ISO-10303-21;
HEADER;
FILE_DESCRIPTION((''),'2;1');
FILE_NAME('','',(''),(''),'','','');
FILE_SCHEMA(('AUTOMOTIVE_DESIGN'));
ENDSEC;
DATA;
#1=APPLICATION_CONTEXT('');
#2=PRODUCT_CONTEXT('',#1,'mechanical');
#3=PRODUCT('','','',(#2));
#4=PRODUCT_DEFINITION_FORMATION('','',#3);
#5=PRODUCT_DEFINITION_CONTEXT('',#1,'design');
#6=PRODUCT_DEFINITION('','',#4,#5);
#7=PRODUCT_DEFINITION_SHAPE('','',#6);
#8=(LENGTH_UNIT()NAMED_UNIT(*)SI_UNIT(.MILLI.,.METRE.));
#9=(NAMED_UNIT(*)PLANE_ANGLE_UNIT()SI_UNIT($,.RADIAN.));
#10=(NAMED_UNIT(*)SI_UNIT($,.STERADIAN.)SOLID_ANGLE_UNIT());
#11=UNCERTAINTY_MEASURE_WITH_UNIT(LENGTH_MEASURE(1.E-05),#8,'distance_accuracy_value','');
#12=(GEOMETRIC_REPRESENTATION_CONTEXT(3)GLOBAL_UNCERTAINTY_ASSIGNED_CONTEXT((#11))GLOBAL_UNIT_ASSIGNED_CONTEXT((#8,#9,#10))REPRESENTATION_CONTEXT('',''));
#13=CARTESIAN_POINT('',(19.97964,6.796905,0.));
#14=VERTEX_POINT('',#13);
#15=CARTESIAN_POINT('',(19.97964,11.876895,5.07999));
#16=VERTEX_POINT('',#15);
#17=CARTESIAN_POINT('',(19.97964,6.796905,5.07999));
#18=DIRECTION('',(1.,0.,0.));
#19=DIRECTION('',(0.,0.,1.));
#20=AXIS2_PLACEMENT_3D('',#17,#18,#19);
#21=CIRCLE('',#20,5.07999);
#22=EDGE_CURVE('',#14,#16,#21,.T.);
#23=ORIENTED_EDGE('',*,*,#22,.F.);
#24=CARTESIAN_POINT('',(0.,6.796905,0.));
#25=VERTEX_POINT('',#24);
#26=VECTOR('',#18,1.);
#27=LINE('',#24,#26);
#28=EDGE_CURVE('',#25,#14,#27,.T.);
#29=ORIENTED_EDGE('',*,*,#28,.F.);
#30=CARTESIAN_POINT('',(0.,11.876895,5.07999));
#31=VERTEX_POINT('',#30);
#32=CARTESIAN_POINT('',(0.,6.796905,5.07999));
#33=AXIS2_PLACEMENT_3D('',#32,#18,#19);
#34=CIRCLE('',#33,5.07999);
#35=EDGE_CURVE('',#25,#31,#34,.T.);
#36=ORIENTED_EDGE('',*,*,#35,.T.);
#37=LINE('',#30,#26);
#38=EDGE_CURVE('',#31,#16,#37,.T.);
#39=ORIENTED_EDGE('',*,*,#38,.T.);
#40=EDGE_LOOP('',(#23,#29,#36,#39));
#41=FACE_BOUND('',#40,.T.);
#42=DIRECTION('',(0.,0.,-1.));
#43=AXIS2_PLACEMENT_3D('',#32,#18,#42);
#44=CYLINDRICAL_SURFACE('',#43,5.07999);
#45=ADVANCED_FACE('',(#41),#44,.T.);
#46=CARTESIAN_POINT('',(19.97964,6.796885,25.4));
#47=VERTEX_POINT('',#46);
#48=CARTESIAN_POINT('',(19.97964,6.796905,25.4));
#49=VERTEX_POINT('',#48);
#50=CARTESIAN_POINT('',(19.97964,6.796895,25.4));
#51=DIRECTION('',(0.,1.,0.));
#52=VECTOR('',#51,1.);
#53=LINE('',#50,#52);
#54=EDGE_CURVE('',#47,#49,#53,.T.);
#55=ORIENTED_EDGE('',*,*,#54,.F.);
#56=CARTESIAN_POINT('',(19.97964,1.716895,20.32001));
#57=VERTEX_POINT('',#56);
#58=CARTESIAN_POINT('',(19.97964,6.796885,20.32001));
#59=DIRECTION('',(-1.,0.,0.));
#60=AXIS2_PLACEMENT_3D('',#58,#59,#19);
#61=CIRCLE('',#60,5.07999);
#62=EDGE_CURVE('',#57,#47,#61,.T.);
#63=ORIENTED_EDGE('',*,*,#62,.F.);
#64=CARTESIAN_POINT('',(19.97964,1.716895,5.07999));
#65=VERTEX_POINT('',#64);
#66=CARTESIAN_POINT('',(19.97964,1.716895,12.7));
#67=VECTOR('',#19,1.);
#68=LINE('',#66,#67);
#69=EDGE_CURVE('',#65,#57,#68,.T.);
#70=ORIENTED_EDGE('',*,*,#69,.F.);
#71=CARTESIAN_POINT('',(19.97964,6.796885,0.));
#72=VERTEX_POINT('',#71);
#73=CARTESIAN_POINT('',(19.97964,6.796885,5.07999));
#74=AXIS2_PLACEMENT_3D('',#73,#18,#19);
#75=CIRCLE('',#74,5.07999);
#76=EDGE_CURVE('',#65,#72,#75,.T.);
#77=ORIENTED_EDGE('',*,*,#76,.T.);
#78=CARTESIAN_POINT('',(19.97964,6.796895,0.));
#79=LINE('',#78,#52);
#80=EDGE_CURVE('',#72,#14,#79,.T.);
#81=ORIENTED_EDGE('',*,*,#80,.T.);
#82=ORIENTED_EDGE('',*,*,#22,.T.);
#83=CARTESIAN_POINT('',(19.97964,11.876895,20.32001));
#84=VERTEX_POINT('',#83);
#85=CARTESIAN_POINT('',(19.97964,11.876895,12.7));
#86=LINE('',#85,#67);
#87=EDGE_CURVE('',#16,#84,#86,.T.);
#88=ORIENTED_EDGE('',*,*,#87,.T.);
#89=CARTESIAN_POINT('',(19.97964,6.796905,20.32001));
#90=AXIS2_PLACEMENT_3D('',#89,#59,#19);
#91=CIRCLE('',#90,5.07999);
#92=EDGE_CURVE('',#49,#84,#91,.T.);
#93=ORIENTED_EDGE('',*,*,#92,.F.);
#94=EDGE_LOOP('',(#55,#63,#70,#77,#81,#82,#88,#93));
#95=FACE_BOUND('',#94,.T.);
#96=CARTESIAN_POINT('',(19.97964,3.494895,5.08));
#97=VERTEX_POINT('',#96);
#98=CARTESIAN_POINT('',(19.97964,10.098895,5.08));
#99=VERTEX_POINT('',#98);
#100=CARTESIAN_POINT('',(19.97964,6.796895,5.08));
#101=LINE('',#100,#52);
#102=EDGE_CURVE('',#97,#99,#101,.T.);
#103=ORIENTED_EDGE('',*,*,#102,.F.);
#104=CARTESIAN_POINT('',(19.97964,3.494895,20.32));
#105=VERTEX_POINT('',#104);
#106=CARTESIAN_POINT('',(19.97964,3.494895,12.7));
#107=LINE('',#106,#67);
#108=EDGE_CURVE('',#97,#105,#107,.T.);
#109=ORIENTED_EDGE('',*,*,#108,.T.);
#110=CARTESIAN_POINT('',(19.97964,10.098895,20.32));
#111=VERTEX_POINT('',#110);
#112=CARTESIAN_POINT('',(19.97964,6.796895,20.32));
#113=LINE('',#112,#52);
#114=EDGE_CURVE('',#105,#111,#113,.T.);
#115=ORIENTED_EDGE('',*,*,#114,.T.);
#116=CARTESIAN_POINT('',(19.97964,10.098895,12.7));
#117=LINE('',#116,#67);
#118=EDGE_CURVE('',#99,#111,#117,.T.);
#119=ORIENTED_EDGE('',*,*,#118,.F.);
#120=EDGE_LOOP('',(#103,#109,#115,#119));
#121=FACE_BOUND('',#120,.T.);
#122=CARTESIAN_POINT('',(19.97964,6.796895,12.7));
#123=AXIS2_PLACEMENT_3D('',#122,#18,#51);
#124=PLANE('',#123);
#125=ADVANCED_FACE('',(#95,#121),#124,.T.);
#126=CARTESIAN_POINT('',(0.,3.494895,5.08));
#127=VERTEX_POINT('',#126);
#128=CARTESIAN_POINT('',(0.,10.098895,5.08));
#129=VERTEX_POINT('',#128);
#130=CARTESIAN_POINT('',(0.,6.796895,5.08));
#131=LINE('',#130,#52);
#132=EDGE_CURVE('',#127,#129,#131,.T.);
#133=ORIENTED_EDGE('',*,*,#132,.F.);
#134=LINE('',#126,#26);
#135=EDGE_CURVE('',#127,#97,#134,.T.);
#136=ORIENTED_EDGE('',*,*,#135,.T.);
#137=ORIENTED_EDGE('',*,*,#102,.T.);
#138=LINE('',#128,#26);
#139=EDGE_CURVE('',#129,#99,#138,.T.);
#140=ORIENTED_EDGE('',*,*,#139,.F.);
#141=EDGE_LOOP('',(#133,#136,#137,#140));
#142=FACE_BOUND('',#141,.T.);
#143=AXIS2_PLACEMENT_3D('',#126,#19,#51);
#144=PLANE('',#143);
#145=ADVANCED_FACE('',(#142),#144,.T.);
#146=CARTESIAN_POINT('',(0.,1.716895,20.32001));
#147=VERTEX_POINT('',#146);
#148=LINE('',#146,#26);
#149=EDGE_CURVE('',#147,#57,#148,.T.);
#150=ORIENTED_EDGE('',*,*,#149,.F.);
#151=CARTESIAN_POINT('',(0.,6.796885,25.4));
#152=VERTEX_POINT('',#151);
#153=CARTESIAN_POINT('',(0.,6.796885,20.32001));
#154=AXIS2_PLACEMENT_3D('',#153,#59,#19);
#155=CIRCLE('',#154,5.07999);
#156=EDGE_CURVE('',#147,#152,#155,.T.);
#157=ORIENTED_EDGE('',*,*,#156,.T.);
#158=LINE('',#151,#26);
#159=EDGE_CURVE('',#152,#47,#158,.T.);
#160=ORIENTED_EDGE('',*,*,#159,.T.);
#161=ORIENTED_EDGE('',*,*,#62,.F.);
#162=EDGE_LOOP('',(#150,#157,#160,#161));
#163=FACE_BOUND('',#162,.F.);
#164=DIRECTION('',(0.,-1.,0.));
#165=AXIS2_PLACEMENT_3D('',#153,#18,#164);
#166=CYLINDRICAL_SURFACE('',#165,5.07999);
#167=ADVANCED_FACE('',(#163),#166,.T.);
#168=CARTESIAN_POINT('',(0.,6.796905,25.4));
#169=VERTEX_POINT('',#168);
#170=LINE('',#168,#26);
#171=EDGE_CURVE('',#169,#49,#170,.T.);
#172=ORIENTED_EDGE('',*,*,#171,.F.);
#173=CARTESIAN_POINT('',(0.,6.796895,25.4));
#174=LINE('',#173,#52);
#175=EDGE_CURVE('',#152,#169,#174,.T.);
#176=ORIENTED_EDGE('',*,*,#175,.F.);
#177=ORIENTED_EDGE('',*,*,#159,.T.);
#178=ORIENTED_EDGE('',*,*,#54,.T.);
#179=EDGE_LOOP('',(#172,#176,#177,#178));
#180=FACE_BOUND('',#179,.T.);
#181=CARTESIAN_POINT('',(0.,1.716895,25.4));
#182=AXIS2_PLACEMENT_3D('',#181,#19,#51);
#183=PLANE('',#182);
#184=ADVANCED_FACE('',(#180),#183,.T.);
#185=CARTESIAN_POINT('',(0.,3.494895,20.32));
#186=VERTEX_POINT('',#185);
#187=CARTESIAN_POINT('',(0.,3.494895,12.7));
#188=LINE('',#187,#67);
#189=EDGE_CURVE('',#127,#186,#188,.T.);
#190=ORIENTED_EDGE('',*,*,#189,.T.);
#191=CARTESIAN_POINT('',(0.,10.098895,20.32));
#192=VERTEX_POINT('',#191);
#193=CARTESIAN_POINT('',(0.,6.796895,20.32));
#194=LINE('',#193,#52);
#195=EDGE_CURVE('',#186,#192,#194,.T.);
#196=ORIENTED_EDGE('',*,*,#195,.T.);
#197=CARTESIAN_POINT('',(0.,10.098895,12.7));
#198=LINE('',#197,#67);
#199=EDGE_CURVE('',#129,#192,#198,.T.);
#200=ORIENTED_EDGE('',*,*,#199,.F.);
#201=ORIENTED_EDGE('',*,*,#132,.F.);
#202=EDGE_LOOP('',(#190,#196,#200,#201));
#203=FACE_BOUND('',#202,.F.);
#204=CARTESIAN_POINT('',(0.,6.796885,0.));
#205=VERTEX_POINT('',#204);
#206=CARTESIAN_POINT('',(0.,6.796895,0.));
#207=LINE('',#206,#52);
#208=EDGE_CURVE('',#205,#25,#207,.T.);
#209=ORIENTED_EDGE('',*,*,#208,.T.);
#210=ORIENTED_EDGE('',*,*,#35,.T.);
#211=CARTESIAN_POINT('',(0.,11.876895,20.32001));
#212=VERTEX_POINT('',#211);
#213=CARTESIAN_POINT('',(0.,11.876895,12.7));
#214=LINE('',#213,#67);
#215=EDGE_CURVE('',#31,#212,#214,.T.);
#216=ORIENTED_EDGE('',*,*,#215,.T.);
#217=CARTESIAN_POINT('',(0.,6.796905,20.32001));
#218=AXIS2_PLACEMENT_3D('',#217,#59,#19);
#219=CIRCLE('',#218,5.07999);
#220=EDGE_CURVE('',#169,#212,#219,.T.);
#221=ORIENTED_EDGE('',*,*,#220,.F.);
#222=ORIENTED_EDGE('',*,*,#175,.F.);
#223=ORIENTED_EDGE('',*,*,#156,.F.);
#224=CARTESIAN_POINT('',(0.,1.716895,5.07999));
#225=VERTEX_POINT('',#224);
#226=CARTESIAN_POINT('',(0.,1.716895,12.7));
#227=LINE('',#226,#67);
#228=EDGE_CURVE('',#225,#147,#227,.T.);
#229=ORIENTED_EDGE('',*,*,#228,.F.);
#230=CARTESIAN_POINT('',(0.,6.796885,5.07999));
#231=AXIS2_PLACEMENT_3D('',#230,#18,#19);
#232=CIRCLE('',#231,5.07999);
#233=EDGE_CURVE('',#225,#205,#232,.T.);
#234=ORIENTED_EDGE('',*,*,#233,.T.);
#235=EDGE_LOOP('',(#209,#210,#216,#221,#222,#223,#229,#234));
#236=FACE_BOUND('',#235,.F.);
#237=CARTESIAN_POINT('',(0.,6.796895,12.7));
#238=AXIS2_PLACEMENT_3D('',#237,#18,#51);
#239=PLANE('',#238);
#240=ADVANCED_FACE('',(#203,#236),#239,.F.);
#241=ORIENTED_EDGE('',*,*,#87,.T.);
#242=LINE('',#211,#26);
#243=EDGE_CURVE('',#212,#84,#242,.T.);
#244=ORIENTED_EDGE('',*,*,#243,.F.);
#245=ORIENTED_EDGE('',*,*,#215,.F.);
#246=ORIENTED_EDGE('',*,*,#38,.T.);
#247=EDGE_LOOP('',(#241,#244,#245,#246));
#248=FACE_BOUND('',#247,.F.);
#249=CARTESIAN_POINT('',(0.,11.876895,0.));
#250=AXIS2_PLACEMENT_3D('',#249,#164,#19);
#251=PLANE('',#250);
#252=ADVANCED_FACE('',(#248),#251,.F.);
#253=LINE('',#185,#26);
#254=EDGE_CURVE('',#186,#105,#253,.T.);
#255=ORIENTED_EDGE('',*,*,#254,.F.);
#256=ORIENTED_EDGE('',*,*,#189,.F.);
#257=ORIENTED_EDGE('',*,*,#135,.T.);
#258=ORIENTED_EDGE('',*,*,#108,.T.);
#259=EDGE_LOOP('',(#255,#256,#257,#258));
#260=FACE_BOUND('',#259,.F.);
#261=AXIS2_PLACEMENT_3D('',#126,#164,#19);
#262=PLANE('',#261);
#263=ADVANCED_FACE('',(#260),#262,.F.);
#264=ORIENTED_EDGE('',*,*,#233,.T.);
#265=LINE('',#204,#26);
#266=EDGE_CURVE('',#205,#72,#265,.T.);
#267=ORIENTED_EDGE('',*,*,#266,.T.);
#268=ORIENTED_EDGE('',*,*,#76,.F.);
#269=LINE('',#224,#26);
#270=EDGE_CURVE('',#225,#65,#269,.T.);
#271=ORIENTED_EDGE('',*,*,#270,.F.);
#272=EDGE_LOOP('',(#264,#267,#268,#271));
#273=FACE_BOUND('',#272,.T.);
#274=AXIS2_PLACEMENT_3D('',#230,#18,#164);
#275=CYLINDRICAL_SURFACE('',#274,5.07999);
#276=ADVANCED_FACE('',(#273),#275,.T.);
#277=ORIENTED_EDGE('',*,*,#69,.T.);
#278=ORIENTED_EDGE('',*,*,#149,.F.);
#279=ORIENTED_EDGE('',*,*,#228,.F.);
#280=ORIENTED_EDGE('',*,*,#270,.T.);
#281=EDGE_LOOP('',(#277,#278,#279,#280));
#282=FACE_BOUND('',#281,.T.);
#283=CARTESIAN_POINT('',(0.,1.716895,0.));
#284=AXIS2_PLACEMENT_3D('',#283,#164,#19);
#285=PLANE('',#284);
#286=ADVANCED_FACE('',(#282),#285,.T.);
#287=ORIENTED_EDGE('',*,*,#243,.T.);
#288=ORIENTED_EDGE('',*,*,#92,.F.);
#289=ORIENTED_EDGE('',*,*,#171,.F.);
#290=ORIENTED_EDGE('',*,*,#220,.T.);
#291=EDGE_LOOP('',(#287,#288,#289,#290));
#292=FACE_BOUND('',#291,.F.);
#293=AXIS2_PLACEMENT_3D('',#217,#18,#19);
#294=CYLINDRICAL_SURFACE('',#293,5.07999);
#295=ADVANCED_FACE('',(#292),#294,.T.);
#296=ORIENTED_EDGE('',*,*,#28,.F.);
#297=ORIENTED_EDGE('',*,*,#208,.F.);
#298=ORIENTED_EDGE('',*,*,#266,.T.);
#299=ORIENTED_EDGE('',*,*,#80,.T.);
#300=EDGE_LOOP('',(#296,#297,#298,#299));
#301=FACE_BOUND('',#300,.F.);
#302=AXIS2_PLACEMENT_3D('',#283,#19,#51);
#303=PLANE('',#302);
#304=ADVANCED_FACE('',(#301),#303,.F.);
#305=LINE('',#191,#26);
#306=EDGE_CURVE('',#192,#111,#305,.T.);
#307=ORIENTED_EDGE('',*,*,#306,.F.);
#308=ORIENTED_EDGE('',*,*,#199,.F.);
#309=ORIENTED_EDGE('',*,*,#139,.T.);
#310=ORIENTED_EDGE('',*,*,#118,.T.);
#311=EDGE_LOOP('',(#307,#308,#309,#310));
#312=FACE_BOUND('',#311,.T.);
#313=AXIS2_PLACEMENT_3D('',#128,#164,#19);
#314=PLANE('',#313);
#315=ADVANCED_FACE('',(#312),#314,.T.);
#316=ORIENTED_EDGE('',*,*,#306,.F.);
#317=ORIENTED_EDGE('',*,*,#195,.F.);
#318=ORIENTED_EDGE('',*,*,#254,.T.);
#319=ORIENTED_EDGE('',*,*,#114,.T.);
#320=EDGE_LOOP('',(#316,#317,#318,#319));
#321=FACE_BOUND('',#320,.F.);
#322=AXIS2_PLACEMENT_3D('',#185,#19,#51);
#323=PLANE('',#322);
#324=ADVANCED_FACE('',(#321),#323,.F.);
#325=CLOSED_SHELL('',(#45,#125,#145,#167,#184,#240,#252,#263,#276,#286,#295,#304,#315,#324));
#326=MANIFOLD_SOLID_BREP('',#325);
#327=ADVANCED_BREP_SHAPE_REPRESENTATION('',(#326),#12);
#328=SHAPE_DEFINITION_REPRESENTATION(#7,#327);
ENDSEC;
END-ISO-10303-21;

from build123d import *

# Parameters (mm, degrees)
F0_W     = 10.16
F0_H     = 25.4
F0_W_2   = 6.604
F0_H_2   = 15.24
F1_DEPTH = 19.97964
F2_R     = 5.07999


# Not quite as in the source:
# - a fillet or chamfer is up to 0.001 mm smaller than in the source, because OpenCascade refuses the exact size


with BuildPart() as f1:
    # F0 (on Right) → F1 (new body)
    with BuildSketch(Plane.YZ):
        with Locations((6.7968953631, 12.7)):
            Rectangle(F0_W, F0_H)
        with Locations((6.7968953631, 12.7)):
            Rectangle(F0_W_2, F0_H_2, mode=Mode.SUBTRACT)
    extrude(amount=F1_DEPTH)

    # F2 (radius 5.08 in the source; OpenCascade refuses exactly that, so slightly less here)
    f2_edges = [f1.edges().sort_by_distance(p)[0] for p in [
        (9.98982, 1.716895, 25.4),
        (9.98982, 11.876895, 25.4),
        (9.98982, 1.716895, 0),
        (9.98982, 11.876895, 0),
    ]]
    fillet(f2_edges, radius=F2_R)


solid = f1.part
